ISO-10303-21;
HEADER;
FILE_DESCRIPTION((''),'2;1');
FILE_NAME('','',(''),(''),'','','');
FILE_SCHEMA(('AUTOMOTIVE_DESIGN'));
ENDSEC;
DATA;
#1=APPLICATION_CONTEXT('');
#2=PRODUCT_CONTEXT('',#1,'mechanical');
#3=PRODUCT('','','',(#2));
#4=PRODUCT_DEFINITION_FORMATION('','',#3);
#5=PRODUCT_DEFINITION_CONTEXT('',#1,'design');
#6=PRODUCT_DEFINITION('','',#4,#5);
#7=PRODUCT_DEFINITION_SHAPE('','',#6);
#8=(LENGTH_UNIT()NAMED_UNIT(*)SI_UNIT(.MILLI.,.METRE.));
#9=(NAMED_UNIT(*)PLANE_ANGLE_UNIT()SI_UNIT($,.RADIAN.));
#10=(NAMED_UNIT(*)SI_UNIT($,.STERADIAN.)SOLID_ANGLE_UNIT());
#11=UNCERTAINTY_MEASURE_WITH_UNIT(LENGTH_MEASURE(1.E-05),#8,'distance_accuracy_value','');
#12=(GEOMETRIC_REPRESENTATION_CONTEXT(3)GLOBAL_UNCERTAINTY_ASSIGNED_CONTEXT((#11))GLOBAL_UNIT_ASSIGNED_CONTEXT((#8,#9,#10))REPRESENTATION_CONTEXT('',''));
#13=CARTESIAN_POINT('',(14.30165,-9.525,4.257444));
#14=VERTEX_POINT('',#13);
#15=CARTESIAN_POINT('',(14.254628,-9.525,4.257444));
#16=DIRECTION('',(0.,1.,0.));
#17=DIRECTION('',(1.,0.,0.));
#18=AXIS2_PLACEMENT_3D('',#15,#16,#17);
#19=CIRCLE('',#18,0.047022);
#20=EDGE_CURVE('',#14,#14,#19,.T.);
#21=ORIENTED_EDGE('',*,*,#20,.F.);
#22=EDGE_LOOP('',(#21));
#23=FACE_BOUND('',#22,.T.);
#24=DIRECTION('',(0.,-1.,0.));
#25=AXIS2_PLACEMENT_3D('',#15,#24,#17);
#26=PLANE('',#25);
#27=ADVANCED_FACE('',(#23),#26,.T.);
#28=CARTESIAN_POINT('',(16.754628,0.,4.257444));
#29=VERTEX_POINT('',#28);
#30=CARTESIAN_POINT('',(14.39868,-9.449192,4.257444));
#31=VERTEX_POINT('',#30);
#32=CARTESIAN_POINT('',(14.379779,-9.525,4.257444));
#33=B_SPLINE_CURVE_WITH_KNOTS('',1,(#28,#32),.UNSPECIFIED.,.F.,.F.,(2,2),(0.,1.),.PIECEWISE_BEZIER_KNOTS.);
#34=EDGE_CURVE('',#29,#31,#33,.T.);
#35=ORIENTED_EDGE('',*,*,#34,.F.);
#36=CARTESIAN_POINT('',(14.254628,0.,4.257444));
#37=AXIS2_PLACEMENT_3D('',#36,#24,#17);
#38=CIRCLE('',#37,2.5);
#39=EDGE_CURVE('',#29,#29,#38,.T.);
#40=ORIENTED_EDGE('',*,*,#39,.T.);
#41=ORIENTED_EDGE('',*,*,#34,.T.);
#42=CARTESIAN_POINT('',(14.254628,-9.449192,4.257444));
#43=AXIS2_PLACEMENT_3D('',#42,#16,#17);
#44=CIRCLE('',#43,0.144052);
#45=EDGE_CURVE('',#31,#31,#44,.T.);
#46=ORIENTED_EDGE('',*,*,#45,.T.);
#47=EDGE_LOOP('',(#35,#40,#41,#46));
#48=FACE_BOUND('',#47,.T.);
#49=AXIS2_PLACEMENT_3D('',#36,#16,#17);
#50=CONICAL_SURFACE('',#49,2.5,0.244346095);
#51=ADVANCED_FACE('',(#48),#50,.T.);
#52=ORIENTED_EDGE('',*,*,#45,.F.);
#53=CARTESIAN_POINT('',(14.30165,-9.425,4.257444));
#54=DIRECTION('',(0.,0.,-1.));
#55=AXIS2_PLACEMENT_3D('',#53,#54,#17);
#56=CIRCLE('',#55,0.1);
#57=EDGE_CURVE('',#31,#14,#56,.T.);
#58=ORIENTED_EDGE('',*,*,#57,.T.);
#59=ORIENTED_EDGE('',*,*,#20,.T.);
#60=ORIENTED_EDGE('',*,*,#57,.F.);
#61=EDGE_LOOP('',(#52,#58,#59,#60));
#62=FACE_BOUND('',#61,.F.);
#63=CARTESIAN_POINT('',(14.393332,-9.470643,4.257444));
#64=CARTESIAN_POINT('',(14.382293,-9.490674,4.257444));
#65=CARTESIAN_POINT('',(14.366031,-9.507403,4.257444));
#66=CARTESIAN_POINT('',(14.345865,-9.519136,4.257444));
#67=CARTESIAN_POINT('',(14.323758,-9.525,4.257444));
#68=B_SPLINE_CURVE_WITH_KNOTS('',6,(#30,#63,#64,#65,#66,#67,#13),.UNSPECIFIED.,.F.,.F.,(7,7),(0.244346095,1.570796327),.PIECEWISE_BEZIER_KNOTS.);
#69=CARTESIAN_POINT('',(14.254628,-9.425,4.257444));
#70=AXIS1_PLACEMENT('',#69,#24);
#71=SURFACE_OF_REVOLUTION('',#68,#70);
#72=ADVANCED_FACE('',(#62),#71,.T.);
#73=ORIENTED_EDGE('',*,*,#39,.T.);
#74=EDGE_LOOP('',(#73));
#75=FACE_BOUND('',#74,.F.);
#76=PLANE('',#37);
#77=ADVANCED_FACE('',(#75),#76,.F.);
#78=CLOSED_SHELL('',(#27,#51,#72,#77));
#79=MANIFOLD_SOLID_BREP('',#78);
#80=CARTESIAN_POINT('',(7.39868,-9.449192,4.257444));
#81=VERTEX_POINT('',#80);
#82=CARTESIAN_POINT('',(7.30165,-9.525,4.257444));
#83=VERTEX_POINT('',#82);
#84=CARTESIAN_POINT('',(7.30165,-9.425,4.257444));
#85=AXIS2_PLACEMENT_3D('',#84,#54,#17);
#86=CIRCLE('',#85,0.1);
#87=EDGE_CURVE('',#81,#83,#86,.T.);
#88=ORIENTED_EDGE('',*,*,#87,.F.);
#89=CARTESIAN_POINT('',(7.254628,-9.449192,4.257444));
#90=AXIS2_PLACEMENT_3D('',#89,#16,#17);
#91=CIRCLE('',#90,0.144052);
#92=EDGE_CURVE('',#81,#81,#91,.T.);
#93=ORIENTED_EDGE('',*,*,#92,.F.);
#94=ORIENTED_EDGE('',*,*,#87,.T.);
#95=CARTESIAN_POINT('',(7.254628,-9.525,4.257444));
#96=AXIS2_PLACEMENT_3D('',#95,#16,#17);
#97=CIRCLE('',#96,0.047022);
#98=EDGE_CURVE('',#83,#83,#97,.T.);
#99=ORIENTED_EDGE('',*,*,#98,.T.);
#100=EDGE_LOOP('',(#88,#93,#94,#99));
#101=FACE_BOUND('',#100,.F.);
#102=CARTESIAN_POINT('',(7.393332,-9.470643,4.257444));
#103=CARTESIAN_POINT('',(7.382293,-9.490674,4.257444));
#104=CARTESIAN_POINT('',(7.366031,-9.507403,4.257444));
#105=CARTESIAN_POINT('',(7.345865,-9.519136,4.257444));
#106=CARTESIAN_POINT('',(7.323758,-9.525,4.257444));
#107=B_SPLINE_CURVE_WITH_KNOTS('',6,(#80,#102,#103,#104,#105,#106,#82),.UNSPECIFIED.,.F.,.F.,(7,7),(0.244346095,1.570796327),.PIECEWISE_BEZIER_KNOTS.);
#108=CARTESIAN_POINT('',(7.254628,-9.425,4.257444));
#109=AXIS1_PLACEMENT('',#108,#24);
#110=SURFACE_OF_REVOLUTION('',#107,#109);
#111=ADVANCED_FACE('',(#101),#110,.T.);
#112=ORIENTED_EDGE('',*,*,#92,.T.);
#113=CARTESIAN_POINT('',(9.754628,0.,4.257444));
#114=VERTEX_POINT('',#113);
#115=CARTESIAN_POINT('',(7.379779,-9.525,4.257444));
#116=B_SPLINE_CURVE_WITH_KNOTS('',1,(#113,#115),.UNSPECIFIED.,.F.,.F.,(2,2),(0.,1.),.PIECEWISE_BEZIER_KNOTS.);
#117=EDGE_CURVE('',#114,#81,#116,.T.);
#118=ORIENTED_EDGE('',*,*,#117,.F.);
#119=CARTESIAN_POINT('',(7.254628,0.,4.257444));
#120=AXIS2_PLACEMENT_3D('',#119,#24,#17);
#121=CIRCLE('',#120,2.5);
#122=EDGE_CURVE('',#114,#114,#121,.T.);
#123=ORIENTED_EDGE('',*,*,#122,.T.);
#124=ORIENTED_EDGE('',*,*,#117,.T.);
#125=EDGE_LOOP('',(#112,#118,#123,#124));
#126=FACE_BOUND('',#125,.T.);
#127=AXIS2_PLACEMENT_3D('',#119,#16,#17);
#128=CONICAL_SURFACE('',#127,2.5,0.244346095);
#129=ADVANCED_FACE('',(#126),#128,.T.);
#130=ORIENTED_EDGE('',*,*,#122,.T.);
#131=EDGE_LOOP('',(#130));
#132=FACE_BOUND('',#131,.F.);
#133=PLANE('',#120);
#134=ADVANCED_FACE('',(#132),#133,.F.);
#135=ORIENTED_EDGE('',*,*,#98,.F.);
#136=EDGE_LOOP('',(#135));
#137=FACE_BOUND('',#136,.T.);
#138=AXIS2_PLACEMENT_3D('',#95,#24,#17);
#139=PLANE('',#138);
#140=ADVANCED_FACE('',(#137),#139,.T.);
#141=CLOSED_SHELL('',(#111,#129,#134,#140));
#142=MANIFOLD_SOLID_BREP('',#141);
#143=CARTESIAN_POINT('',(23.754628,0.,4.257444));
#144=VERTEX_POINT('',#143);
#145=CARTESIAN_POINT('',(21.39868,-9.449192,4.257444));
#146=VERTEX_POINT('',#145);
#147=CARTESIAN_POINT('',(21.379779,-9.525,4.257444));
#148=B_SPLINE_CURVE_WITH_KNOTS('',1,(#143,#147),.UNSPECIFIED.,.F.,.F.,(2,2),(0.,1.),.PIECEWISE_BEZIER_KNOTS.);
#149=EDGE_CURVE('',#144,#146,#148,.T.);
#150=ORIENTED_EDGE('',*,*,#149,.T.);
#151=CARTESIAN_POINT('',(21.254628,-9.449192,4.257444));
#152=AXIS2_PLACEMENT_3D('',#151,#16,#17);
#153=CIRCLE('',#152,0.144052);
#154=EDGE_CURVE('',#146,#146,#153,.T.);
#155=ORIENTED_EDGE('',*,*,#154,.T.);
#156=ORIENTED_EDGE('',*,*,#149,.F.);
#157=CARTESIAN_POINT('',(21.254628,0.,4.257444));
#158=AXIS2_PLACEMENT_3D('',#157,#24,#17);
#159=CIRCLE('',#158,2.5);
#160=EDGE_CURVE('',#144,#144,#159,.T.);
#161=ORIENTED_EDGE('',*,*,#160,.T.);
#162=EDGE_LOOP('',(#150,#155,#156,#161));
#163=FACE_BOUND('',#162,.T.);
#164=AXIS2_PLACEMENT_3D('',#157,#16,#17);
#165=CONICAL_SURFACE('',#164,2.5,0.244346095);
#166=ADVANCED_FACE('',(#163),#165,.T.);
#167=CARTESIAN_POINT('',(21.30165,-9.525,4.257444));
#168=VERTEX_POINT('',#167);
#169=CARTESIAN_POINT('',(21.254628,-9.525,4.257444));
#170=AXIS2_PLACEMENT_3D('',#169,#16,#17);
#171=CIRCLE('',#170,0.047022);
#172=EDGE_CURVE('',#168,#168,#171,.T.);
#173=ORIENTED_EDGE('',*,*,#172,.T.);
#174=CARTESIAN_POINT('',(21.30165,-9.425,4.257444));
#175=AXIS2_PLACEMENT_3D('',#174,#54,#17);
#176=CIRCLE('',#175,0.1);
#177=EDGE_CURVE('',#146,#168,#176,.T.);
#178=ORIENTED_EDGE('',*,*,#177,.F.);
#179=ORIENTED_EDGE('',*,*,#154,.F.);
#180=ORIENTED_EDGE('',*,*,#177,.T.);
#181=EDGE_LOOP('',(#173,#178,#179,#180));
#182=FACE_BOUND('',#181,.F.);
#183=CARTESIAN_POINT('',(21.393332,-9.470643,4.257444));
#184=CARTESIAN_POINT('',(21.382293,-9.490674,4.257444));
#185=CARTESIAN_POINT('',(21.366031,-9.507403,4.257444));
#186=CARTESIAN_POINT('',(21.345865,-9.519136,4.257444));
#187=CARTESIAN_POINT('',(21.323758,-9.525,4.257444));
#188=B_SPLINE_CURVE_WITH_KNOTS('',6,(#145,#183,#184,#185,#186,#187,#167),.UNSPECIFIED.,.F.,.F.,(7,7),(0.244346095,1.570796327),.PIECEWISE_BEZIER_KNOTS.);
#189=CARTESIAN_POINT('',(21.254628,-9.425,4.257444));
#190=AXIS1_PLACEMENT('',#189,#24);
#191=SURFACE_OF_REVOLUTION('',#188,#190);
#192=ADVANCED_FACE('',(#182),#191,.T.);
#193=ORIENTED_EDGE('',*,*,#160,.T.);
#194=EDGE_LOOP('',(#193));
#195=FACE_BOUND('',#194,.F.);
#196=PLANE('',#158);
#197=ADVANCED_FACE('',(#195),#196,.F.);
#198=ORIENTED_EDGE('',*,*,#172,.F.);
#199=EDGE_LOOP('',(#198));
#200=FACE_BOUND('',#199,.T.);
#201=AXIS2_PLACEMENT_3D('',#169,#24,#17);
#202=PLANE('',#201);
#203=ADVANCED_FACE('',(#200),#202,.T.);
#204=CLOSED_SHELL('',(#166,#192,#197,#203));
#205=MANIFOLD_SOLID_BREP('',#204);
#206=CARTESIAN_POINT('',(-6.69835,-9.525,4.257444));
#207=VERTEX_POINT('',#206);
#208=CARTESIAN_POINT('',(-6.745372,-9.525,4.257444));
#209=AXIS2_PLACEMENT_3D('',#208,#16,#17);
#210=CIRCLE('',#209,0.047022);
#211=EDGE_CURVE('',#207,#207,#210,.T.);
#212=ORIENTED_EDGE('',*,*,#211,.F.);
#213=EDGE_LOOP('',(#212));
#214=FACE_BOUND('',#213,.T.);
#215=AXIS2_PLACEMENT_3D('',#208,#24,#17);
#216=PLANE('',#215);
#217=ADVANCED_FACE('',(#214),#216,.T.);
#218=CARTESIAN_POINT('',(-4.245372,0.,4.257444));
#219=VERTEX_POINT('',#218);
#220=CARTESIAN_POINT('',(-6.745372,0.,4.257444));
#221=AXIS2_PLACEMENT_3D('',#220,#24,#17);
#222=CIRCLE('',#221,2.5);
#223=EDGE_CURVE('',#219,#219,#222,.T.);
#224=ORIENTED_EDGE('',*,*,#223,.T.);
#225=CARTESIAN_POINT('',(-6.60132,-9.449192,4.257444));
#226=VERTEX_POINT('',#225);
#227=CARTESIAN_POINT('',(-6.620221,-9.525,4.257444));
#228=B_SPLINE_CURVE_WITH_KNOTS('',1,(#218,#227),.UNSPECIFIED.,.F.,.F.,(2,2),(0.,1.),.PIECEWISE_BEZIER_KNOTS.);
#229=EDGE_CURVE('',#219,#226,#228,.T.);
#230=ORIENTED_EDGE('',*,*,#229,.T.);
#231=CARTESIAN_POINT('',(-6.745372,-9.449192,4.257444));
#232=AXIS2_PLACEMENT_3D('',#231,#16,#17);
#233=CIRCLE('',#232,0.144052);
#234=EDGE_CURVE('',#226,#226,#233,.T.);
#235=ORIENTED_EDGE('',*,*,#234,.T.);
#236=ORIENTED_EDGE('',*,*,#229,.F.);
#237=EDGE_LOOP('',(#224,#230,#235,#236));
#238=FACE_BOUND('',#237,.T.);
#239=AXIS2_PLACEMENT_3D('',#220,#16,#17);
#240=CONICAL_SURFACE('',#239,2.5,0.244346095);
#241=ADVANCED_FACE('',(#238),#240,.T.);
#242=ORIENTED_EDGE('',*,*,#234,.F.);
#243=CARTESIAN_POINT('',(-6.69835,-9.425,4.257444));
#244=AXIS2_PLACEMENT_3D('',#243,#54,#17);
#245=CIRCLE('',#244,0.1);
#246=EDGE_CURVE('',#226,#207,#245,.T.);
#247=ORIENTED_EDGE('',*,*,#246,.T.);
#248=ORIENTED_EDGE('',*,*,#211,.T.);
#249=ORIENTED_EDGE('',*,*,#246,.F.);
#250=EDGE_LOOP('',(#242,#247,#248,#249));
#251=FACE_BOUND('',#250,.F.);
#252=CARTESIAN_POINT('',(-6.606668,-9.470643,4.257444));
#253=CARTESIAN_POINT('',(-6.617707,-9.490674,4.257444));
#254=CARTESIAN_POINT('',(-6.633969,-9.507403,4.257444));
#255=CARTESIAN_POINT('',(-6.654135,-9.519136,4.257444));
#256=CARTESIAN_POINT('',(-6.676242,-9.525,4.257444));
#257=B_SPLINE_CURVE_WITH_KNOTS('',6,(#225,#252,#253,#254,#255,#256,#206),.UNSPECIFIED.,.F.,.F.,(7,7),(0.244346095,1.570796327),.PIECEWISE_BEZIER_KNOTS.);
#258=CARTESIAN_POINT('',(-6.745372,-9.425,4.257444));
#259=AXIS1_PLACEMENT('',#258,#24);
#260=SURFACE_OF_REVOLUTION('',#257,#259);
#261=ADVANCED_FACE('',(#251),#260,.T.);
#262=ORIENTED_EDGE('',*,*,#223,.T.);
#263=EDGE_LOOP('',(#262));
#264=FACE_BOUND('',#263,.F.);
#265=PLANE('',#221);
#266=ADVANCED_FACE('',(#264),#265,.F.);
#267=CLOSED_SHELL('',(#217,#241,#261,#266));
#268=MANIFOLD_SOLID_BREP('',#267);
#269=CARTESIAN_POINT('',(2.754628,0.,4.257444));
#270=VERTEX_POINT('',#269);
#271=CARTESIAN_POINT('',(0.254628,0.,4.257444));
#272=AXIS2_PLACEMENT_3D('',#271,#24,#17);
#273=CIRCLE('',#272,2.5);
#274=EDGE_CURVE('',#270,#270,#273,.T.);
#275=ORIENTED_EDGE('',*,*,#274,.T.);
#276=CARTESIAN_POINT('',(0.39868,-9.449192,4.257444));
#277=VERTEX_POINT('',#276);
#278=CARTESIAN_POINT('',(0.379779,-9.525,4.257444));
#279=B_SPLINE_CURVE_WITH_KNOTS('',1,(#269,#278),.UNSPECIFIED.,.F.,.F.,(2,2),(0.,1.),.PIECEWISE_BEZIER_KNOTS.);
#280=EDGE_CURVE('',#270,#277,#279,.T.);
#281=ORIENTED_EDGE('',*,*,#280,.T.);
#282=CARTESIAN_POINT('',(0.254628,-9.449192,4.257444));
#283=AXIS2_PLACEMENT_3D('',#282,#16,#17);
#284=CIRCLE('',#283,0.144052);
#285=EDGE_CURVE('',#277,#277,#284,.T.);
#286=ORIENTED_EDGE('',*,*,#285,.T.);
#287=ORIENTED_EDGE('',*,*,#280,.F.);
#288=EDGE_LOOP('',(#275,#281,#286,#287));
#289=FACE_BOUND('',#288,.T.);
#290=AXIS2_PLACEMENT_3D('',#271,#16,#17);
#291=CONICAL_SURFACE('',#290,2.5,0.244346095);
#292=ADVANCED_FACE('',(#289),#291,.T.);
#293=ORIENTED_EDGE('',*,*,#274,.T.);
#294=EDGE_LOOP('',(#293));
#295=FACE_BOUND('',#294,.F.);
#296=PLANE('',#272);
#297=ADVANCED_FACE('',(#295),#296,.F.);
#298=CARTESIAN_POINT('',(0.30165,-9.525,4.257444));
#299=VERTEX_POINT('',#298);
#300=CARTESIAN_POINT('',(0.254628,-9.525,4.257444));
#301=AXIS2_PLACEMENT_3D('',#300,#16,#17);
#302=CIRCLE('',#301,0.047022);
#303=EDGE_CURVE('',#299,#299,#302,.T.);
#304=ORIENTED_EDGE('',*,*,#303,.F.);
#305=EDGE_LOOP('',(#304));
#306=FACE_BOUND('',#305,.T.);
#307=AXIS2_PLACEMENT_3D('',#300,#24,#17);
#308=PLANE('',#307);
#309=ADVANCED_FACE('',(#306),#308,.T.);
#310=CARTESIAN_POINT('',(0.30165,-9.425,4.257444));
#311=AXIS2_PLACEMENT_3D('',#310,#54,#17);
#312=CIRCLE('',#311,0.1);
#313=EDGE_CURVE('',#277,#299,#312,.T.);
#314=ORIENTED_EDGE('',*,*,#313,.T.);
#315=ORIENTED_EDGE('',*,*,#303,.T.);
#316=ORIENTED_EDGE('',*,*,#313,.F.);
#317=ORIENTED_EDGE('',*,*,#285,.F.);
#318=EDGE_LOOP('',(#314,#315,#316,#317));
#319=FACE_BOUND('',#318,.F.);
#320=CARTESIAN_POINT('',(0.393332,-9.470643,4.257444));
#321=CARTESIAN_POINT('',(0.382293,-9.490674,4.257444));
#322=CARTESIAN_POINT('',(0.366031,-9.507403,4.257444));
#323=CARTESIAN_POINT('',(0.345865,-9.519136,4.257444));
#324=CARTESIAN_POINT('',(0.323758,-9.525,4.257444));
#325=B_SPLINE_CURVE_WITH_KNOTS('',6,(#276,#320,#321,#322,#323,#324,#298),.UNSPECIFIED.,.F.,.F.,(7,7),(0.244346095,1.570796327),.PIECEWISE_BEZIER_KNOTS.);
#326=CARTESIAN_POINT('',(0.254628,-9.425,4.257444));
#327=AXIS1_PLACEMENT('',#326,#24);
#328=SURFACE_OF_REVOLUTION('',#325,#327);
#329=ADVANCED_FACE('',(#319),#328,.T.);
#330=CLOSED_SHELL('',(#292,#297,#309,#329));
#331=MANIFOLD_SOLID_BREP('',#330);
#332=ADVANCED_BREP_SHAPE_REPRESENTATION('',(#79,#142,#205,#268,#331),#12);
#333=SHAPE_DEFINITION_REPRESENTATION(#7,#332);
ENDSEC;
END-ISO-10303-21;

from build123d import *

# Parameters (mm, degrees)
F0_R     = 2.5
F1_DEPTH = 9.525
F1_TAPER = 14
F2_R     = 0.1
F2_2_R   = 0.1
F2_3_R   = 0.1
F2_4_R   = 0.1
F2_5_R   = 0.1


# Not quite as in the source:
# - a length typed as a fraction of an inch, garbled in the dataset ("3 / 203.2 mm" for 3/8 in), is restored


with BuildPart() as f1:
    # F0 (on Front) → F1 (new body)
    with BuildSketch(Plane.XZ):
        with Locations((-6.7453719676, 4.2574442923)):
            Circle(F0_R)
    extrude(amount=F1_DEPTH, taper=F1_TAPER)

    # F2
    f2_edges = [f1.edges().sort_by_distance(p)[0] for p in [
        (-6.870523, -9.525, 4.257444),
    ]]
    fillet(f2_edges, radius=F2_R)


with BuildPart() as f1b:
    # F0 (on Front) → F1, piece 2 (new body)
    with BuildSketch(Plane.XZ):
        with Locations((0.2546280324, 4.2574442923)):
            Circle(F0_R)
    extrude(amount=F1_DEPTH, taper=F1_TAPER)

    # F2#2
    f2_2_edges = [f1b.edges().sort_by_distance(p)[0] for p in [
        (0.129477, -9.525, 4.257444),
    ]]
    fillet(f2_2_edges, radius=F2_2_R)


with BuildPart() as f1c:
    # F0 (on Front) → F1, piece 3 (new body)
    with BuildSketch(Plane.XZ):
        with Locations((7.2546280324, 4.2574442923)):
            Circle(F0_R)
    extrude(amount=F1_DEPTH, taper=F1_TAPER)

    # F2#3
    f2_3_edges = [f1c.edges().sort_by_distance(p)[0] for p in [
        (7.129477, -9.525, 4.257444),
    ]]
    fillet(f2_3_edges, radius=F2_3_R)


with BuildPart() as f1d:
    # F0 (on Front) → F1, piece 4 (new body)
    with BuildSketch(Plane.XZ):
        with Locations((14.2546280324, 4.2574442923)):
            Circle(F0_R)
    extrude(amount=F1_DEPTH, taper=F1_TAPER)

    # F2#4
    f2_4_edges = [f1d.edges().sort_by_distance(p)[0] for p in [
        (14.129477, -9.525, 4.257444),
    ]]
    fillet(f2_4_edges, radius=F2_4_R)


with BuildPart() as f1e:
    # F0 (on Front) → F1, piece 5 (new body)
    with BuildSketch(Plane.XZ):
        with Locations((21.2546280324, 4.2574442923)):
            Circle(F0_R)
    extrude(amount=F1_DEPTH, taper=F1_TAPER)

    # F2#5
    f2_5_edges = [f1e.edges().sort_by_distance(p)[0] for p in [
        (21.129477, -9.525, 4.257444),
    ]]
    fillet(f2_5_edges, radius=F2_5_R)


solid = Compound([f1.part, f1b.part, f1c.part, f1d.part, f1e.part])
